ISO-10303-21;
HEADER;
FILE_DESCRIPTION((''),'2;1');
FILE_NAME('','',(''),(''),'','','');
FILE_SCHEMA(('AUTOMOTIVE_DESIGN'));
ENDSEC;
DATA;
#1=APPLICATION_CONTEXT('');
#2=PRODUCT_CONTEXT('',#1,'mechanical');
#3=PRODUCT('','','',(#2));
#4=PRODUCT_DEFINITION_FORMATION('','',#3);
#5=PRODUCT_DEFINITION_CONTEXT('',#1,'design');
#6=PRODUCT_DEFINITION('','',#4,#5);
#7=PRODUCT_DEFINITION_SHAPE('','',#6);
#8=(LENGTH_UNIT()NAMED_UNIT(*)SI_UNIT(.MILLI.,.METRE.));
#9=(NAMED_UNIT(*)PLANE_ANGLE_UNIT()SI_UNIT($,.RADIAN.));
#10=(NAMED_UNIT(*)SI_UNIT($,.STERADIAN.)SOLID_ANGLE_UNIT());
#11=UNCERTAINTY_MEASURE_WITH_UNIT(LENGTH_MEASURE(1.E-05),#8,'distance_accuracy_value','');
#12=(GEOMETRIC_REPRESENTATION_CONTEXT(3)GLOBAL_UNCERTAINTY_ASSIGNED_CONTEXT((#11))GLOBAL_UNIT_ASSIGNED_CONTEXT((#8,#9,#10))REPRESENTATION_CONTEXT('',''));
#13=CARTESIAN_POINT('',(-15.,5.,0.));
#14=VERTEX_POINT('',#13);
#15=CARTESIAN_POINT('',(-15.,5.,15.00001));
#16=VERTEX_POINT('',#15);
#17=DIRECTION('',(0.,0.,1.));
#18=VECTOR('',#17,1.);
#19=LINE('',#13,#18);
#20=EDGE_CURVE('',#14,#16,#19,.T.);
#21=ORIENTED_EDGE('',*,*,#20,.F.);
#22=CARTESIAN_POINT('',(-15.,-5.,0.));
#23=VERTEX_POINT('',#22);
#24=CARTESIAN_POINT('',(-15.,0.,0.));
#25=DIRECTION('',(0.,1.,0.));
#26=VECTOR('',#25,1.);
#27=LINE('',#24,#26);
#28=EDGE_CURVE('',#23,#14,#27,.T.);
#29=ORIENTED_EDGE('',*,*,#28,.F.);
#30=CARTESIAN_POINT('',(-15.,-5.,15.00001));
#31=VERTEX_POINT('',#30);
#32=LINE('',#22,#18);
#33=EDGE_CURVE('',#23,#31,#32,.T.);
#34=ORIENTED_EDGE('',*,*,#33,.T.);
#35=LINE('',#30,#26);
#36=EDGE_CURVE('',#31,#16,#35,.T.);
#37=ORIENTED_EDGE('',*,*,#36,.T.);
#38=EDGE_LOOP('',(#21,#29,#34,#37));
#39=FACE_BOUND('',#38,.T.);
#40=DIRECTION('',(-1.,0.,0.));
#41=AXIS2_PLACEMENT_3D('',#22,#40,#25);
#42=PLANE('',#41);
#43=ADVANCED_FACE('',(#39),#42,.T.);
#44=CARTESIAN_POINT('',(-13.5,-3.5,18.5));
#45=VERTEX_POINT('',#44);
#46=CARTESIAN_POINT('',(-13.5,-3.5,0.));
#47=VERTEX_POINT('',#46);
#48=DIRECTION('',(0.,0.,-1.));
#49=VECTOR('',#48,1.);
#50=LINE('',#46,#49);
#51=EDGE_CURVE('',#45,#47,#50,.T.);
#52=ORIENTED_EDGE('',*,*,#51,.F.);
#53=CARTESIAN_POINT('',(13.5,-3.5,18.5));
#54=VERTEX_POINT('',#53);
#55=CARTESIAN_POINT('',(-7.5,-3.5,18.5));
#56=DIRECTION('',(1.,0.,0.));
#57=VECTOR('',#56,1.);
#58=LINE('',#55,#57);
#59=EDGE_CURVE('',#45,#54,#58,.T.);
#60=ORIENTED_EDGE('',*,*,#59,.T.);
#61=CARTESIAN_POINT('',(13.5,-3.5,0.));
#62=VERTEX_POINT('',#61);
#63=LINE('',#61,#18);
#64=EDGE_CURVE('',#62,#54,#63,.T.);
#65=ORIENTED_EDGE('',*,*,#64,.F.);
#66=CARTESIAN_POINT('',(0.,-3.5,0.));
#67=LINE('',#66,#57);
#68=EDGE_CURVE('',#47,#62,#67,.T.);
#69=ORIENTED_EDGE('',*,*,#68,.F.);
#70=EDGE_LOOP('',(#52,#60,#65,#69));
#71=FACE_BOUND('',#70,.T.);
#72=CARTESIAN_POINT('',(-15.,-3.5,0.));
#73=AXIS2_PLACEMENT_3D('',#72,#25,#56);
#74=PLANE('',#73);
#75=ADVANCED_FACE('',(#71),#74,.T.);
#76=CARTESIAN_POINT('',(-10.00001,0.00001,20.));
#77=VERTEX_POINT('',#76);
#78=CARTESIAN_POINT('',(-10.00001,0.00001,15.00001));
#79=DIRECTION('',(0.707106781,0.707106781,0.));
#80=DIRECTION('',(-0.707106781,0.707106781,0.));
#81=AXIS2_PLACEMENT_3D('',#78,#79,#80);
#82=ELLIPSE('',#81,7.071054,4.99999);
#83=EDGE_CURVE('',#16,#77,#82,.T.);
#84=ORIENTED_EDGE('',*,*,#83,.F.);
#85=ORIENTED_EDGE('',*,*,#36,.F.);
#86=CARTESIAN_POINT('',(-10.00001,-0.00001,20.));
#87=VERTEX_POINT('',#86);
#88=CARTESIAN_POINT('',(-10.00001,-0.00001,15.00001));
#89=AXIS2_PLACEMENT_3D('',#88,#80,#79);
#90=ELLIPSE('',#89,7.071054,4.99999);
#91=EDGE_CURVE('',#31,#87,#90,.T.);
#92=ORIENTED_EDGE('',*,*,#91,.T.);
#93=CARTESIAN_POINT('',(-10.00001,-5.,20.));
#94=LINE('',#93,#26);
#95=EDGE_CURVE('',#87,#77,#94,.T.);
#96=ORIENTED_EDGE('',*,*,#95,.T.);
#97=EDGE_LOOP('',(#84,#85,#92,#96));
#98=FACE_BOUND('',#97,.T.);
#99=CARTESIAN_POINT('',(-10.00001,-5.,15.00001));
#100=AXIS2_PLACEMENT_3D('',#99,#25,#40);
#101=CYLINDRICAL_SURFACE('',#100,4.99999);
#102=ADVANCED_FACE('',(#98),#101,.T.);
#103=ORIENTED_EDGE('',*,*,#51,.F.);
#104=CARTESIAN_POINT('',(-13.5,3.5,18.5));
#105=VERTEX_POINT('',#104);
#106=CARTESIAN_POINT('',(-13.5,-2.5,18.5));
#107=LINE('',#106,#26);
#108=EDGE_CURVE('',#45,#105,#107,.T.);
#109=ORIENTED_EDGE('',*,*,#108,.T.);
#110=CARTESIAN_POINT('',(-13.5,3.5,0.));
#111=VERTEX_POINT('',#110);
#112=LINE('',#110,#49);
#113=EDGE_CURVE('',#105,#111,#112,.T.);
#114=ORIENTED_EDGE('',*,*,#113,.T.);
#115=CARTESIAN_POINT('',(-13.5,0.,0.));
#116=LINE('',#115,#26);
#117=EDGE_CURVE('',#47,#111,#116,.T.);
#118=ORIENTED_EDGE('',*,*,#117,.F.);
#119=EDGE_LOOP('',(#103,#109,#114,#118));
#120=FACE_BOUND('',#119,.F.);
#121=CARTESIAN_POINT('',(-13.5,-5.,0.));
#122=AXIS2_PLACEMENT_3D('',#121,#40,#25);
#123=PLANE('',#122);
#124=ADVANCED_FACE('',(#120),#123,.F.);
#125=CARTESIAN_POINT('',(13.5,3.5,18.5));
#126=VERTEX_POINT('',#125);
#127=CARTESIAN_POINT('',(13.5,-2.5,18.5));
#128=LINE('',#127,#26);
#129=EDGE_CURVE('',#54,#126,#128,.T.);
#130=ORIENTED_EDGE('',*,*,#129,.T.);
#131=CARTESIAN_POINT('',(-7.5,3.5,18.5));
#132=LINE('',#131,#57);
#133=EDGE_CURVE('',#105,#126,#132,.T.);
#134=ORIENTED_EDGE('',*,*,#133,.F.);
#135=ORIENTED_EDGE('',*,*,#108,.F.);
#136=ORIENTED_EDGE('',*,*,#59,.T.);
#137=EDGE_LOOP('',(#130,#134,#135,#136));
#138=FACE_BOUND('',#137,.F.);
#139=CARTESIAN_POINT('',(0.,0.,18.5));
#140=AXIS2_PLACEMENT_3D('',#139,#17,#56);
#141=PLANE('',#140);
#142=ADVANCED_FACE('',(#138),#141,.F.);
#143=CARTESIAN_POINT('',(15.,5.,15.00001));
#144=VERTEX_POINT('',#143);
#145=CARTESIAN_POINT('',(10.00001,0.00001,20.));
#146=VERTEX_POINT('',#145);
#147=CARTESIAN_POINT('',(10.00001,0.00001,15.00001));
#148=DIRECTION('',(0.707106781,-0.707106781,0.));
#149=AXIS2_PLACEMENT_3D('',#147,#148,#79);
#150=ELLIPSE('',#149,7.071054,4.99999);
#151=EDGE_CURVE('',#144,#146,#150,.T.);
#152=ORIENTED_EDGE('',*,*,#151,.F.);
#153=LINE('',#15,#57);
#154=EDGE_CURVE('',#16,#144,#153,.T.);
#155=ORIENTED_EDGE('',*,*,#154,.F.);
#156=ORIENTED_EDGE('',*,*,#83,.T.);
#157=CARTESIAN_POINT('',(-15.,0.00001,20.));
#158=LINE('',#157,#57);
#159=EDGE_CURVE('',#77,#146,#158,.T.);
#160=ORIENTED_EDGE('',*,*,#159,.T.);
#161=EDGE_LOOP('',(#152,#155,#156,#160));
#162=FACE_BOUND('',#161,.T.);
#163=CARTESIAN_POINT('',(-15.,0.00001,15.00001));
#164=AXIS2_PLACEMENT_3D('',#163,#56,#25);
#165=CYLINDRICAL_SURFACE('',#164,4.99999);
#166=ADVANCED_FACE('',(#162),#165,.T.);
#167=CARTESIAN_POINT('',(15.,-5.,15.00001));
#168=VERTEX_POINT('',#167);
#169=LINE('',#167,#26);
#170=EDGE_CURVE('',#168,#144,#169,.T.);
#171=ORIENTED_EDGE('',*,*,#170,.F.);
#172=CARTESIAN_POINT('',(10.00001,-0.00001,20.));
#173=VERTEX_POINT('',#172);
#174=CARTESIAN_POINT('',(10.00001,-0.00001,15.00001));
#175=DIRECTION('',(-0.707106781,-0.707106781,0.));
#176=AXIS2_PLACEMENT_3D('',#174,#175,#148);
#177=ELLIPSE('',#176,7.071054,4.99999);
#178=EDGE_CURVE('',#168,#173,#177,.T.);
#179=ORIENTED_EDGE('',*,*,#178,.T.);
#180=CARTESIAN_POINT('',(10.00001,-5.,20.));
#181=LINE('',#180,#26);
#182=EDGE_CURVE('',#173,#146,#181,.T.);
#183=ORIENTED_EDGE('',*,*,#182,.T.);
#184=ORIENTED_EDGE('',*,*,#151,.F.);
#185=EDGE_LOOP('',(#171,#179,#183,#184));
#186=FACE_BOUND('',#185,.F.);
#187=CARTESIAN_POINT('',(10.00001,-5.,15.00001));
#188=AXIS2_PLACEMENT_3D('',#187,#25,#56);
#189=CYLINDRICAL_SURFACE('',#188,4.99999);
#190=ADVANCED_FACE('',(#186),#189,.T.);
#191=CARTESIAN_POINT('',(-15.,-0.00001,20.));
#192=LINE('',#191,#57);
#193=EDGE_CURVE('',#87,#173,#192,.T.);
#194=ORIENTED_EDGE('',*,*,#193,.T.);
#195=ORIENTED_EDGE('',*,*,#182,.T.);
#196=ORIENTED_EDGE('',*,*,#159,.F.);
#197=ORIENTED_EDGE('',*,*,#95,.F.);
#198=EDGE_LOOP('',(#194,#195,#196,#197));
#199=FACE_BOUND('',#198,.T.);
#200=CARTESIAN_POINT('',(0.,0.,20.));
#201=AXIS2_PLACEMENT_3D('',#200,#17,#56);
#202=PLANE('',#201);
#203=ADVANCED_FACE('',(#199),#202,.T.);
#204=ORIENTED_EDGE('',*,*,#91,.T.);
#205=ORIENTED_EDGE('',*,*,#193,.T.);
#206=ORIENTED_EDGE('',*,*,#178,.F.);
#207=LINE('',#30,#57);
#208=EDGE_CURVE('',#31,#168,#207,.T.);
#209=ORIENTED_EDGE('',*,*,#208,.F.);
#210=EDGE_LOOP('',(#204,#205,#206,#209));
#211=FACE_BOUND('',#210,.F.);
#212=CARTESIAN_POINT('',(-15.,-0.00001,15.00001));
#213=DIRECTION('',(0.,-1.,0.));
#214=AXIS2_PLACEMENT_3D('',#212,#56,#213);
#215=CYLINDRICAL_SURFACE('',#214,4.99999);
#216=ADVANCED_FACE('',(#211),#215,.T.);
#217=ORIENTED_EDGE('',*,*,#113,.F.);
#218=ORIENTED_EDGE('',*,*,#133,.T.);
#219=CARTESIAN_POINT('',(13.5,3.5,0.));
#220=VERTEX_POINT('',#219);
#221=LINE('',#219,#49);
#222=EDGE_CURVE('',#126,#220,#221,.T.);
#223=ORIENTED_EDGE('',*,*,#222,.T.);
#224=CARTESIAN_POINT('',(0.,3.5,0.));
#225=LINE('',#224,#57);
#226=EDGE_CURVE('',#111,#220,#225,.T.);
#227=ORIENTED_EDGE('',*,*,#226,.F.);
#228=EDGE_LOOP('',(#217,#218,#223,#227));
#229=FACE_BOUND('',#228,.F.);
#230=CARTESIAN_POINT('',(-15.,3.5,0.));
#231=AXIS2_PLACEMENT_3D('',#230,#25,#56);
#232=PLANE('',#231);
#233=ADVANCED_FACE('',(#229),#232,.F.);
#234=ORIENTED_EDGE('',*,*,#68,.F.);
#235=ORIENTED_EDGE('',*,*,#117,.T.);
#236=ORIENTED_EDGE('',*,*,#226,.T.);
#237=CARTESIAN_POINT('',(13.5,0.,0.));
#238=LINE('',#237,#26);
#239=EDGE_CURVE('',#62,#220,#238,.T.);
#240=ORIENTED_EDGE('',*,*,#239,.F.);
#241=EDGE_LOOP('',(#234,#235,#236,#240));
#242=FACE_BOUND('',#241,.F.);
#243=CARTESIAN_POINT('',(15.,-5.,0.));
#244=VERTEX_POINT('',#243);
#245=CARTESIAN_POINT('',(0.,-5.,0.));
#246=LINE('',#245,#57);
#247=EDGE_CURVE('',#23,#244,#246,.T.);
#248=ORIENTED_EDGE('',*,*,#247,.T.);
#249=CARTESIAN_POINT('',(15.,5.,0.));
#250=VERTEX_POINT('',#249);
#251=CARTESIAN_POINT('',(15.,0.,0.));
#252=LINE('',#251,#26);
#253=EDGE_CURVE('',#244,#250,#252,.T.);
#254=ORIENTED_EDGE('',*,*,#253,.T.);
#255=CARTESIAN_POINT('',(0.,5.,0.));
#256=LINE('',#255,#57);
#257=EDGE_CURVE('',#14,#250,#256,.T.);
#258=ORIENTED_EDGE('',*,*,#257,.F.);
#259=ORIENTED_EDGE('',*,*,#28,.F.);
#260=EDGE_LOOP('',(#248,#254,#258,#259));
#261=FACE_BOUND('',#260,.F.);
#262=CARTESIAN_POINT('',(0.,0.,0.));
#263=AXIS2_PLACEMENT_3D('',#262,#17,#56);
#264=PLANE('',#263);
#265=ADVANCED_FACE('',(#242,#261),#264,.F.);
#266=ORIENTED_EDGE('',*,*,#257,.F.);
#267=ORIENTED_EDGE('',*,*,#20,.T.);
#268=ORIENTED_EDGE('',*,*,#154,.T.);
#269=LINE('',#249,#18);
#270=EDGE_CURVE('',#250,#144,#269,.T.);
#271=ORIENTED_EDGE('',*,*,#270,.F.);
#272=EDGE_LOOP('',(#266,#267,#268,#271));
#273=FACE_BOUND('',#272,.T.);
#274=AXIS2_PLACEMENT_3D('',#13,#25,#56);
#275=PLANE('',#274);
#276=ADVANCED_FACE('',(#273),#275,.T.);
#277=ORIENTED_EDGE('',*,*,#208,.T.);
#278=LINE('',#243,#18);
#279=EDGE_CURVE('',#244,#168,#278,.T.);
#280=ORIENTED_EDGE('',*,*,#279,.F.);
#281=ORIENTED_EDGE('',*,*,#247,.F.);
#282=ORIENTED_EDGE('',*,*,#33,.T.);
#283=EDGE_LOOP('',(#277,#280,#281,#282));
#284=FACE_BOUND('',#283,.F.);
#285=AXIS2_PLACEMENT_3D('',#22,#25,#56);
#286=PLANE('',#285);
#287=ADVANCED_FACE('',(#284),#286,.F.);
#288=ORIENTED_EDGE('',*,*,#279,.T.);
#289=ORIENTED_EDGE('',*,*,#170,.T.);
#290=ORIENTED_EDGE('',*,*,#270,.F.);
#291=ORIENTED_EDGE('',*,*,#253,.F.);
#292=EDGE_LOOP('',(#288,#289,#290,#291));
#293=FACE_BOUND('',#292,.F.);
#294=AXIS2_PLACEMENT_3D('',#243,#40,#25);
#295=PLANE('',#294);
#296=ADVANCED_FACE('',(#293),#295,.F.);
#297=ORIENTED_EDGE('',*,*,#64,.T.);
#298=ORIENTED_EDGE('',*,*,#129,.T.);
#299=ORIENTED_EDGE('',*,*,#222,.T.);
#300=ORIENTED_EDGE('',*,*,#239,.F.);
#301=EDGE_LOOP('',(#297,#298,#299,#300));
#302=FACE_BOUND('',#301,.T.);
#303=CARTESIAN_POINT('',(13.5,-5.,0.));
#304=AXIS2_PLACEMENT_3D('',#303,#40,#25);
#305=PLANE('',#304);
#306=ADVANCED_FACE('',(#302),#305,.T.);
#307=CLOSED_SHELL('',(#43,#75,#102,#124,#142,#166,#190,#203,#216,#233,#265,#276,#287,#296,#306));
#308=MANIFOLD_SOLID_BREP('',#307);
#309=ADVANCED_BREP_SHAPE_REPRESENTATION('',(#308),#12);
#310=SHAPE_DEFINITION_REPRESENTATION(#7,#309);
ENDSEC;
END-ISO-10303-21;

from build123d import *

# Parameters (mm, degrees)
F0_W     = 30
F0_H     = 10
F1_DEPTH = 20
F2_T     = -1.5
F3_R     = 4.99999


# Not quite as in the source:
# - a fillet or chamfer is up to 0.001 mm smaller than in the source, because OpenCascade refuses the exact size


with BuildPart() as f1:
    # F0 (on Top) → F1 (new body)
    with BuildSketch(Plane.XY):
        Rectangle(F0_W, F0_H)
    extrude(amount=F1_DEPTH)

    # F2
    f2_openings = [f1.faces().sort_by_distance(p)[0] for p in [
        (0, 0, 0),
    ]]
    offset(amount=F2_T, openings=f2_openings)

    # F3 (radius 5 in the source; OpenCascade refuses exactly that, so slightly less here)
    f3_edges = [f1.edges().sort_by_distance(p)[0] for p in [
        (-15, 0, 20),
        (0, -5, 20),
        (0, 5, 20),
        (15, 0, 20),
    ]]
    fillet(f3_edges, radius=F3_R)


solid = f1.part
